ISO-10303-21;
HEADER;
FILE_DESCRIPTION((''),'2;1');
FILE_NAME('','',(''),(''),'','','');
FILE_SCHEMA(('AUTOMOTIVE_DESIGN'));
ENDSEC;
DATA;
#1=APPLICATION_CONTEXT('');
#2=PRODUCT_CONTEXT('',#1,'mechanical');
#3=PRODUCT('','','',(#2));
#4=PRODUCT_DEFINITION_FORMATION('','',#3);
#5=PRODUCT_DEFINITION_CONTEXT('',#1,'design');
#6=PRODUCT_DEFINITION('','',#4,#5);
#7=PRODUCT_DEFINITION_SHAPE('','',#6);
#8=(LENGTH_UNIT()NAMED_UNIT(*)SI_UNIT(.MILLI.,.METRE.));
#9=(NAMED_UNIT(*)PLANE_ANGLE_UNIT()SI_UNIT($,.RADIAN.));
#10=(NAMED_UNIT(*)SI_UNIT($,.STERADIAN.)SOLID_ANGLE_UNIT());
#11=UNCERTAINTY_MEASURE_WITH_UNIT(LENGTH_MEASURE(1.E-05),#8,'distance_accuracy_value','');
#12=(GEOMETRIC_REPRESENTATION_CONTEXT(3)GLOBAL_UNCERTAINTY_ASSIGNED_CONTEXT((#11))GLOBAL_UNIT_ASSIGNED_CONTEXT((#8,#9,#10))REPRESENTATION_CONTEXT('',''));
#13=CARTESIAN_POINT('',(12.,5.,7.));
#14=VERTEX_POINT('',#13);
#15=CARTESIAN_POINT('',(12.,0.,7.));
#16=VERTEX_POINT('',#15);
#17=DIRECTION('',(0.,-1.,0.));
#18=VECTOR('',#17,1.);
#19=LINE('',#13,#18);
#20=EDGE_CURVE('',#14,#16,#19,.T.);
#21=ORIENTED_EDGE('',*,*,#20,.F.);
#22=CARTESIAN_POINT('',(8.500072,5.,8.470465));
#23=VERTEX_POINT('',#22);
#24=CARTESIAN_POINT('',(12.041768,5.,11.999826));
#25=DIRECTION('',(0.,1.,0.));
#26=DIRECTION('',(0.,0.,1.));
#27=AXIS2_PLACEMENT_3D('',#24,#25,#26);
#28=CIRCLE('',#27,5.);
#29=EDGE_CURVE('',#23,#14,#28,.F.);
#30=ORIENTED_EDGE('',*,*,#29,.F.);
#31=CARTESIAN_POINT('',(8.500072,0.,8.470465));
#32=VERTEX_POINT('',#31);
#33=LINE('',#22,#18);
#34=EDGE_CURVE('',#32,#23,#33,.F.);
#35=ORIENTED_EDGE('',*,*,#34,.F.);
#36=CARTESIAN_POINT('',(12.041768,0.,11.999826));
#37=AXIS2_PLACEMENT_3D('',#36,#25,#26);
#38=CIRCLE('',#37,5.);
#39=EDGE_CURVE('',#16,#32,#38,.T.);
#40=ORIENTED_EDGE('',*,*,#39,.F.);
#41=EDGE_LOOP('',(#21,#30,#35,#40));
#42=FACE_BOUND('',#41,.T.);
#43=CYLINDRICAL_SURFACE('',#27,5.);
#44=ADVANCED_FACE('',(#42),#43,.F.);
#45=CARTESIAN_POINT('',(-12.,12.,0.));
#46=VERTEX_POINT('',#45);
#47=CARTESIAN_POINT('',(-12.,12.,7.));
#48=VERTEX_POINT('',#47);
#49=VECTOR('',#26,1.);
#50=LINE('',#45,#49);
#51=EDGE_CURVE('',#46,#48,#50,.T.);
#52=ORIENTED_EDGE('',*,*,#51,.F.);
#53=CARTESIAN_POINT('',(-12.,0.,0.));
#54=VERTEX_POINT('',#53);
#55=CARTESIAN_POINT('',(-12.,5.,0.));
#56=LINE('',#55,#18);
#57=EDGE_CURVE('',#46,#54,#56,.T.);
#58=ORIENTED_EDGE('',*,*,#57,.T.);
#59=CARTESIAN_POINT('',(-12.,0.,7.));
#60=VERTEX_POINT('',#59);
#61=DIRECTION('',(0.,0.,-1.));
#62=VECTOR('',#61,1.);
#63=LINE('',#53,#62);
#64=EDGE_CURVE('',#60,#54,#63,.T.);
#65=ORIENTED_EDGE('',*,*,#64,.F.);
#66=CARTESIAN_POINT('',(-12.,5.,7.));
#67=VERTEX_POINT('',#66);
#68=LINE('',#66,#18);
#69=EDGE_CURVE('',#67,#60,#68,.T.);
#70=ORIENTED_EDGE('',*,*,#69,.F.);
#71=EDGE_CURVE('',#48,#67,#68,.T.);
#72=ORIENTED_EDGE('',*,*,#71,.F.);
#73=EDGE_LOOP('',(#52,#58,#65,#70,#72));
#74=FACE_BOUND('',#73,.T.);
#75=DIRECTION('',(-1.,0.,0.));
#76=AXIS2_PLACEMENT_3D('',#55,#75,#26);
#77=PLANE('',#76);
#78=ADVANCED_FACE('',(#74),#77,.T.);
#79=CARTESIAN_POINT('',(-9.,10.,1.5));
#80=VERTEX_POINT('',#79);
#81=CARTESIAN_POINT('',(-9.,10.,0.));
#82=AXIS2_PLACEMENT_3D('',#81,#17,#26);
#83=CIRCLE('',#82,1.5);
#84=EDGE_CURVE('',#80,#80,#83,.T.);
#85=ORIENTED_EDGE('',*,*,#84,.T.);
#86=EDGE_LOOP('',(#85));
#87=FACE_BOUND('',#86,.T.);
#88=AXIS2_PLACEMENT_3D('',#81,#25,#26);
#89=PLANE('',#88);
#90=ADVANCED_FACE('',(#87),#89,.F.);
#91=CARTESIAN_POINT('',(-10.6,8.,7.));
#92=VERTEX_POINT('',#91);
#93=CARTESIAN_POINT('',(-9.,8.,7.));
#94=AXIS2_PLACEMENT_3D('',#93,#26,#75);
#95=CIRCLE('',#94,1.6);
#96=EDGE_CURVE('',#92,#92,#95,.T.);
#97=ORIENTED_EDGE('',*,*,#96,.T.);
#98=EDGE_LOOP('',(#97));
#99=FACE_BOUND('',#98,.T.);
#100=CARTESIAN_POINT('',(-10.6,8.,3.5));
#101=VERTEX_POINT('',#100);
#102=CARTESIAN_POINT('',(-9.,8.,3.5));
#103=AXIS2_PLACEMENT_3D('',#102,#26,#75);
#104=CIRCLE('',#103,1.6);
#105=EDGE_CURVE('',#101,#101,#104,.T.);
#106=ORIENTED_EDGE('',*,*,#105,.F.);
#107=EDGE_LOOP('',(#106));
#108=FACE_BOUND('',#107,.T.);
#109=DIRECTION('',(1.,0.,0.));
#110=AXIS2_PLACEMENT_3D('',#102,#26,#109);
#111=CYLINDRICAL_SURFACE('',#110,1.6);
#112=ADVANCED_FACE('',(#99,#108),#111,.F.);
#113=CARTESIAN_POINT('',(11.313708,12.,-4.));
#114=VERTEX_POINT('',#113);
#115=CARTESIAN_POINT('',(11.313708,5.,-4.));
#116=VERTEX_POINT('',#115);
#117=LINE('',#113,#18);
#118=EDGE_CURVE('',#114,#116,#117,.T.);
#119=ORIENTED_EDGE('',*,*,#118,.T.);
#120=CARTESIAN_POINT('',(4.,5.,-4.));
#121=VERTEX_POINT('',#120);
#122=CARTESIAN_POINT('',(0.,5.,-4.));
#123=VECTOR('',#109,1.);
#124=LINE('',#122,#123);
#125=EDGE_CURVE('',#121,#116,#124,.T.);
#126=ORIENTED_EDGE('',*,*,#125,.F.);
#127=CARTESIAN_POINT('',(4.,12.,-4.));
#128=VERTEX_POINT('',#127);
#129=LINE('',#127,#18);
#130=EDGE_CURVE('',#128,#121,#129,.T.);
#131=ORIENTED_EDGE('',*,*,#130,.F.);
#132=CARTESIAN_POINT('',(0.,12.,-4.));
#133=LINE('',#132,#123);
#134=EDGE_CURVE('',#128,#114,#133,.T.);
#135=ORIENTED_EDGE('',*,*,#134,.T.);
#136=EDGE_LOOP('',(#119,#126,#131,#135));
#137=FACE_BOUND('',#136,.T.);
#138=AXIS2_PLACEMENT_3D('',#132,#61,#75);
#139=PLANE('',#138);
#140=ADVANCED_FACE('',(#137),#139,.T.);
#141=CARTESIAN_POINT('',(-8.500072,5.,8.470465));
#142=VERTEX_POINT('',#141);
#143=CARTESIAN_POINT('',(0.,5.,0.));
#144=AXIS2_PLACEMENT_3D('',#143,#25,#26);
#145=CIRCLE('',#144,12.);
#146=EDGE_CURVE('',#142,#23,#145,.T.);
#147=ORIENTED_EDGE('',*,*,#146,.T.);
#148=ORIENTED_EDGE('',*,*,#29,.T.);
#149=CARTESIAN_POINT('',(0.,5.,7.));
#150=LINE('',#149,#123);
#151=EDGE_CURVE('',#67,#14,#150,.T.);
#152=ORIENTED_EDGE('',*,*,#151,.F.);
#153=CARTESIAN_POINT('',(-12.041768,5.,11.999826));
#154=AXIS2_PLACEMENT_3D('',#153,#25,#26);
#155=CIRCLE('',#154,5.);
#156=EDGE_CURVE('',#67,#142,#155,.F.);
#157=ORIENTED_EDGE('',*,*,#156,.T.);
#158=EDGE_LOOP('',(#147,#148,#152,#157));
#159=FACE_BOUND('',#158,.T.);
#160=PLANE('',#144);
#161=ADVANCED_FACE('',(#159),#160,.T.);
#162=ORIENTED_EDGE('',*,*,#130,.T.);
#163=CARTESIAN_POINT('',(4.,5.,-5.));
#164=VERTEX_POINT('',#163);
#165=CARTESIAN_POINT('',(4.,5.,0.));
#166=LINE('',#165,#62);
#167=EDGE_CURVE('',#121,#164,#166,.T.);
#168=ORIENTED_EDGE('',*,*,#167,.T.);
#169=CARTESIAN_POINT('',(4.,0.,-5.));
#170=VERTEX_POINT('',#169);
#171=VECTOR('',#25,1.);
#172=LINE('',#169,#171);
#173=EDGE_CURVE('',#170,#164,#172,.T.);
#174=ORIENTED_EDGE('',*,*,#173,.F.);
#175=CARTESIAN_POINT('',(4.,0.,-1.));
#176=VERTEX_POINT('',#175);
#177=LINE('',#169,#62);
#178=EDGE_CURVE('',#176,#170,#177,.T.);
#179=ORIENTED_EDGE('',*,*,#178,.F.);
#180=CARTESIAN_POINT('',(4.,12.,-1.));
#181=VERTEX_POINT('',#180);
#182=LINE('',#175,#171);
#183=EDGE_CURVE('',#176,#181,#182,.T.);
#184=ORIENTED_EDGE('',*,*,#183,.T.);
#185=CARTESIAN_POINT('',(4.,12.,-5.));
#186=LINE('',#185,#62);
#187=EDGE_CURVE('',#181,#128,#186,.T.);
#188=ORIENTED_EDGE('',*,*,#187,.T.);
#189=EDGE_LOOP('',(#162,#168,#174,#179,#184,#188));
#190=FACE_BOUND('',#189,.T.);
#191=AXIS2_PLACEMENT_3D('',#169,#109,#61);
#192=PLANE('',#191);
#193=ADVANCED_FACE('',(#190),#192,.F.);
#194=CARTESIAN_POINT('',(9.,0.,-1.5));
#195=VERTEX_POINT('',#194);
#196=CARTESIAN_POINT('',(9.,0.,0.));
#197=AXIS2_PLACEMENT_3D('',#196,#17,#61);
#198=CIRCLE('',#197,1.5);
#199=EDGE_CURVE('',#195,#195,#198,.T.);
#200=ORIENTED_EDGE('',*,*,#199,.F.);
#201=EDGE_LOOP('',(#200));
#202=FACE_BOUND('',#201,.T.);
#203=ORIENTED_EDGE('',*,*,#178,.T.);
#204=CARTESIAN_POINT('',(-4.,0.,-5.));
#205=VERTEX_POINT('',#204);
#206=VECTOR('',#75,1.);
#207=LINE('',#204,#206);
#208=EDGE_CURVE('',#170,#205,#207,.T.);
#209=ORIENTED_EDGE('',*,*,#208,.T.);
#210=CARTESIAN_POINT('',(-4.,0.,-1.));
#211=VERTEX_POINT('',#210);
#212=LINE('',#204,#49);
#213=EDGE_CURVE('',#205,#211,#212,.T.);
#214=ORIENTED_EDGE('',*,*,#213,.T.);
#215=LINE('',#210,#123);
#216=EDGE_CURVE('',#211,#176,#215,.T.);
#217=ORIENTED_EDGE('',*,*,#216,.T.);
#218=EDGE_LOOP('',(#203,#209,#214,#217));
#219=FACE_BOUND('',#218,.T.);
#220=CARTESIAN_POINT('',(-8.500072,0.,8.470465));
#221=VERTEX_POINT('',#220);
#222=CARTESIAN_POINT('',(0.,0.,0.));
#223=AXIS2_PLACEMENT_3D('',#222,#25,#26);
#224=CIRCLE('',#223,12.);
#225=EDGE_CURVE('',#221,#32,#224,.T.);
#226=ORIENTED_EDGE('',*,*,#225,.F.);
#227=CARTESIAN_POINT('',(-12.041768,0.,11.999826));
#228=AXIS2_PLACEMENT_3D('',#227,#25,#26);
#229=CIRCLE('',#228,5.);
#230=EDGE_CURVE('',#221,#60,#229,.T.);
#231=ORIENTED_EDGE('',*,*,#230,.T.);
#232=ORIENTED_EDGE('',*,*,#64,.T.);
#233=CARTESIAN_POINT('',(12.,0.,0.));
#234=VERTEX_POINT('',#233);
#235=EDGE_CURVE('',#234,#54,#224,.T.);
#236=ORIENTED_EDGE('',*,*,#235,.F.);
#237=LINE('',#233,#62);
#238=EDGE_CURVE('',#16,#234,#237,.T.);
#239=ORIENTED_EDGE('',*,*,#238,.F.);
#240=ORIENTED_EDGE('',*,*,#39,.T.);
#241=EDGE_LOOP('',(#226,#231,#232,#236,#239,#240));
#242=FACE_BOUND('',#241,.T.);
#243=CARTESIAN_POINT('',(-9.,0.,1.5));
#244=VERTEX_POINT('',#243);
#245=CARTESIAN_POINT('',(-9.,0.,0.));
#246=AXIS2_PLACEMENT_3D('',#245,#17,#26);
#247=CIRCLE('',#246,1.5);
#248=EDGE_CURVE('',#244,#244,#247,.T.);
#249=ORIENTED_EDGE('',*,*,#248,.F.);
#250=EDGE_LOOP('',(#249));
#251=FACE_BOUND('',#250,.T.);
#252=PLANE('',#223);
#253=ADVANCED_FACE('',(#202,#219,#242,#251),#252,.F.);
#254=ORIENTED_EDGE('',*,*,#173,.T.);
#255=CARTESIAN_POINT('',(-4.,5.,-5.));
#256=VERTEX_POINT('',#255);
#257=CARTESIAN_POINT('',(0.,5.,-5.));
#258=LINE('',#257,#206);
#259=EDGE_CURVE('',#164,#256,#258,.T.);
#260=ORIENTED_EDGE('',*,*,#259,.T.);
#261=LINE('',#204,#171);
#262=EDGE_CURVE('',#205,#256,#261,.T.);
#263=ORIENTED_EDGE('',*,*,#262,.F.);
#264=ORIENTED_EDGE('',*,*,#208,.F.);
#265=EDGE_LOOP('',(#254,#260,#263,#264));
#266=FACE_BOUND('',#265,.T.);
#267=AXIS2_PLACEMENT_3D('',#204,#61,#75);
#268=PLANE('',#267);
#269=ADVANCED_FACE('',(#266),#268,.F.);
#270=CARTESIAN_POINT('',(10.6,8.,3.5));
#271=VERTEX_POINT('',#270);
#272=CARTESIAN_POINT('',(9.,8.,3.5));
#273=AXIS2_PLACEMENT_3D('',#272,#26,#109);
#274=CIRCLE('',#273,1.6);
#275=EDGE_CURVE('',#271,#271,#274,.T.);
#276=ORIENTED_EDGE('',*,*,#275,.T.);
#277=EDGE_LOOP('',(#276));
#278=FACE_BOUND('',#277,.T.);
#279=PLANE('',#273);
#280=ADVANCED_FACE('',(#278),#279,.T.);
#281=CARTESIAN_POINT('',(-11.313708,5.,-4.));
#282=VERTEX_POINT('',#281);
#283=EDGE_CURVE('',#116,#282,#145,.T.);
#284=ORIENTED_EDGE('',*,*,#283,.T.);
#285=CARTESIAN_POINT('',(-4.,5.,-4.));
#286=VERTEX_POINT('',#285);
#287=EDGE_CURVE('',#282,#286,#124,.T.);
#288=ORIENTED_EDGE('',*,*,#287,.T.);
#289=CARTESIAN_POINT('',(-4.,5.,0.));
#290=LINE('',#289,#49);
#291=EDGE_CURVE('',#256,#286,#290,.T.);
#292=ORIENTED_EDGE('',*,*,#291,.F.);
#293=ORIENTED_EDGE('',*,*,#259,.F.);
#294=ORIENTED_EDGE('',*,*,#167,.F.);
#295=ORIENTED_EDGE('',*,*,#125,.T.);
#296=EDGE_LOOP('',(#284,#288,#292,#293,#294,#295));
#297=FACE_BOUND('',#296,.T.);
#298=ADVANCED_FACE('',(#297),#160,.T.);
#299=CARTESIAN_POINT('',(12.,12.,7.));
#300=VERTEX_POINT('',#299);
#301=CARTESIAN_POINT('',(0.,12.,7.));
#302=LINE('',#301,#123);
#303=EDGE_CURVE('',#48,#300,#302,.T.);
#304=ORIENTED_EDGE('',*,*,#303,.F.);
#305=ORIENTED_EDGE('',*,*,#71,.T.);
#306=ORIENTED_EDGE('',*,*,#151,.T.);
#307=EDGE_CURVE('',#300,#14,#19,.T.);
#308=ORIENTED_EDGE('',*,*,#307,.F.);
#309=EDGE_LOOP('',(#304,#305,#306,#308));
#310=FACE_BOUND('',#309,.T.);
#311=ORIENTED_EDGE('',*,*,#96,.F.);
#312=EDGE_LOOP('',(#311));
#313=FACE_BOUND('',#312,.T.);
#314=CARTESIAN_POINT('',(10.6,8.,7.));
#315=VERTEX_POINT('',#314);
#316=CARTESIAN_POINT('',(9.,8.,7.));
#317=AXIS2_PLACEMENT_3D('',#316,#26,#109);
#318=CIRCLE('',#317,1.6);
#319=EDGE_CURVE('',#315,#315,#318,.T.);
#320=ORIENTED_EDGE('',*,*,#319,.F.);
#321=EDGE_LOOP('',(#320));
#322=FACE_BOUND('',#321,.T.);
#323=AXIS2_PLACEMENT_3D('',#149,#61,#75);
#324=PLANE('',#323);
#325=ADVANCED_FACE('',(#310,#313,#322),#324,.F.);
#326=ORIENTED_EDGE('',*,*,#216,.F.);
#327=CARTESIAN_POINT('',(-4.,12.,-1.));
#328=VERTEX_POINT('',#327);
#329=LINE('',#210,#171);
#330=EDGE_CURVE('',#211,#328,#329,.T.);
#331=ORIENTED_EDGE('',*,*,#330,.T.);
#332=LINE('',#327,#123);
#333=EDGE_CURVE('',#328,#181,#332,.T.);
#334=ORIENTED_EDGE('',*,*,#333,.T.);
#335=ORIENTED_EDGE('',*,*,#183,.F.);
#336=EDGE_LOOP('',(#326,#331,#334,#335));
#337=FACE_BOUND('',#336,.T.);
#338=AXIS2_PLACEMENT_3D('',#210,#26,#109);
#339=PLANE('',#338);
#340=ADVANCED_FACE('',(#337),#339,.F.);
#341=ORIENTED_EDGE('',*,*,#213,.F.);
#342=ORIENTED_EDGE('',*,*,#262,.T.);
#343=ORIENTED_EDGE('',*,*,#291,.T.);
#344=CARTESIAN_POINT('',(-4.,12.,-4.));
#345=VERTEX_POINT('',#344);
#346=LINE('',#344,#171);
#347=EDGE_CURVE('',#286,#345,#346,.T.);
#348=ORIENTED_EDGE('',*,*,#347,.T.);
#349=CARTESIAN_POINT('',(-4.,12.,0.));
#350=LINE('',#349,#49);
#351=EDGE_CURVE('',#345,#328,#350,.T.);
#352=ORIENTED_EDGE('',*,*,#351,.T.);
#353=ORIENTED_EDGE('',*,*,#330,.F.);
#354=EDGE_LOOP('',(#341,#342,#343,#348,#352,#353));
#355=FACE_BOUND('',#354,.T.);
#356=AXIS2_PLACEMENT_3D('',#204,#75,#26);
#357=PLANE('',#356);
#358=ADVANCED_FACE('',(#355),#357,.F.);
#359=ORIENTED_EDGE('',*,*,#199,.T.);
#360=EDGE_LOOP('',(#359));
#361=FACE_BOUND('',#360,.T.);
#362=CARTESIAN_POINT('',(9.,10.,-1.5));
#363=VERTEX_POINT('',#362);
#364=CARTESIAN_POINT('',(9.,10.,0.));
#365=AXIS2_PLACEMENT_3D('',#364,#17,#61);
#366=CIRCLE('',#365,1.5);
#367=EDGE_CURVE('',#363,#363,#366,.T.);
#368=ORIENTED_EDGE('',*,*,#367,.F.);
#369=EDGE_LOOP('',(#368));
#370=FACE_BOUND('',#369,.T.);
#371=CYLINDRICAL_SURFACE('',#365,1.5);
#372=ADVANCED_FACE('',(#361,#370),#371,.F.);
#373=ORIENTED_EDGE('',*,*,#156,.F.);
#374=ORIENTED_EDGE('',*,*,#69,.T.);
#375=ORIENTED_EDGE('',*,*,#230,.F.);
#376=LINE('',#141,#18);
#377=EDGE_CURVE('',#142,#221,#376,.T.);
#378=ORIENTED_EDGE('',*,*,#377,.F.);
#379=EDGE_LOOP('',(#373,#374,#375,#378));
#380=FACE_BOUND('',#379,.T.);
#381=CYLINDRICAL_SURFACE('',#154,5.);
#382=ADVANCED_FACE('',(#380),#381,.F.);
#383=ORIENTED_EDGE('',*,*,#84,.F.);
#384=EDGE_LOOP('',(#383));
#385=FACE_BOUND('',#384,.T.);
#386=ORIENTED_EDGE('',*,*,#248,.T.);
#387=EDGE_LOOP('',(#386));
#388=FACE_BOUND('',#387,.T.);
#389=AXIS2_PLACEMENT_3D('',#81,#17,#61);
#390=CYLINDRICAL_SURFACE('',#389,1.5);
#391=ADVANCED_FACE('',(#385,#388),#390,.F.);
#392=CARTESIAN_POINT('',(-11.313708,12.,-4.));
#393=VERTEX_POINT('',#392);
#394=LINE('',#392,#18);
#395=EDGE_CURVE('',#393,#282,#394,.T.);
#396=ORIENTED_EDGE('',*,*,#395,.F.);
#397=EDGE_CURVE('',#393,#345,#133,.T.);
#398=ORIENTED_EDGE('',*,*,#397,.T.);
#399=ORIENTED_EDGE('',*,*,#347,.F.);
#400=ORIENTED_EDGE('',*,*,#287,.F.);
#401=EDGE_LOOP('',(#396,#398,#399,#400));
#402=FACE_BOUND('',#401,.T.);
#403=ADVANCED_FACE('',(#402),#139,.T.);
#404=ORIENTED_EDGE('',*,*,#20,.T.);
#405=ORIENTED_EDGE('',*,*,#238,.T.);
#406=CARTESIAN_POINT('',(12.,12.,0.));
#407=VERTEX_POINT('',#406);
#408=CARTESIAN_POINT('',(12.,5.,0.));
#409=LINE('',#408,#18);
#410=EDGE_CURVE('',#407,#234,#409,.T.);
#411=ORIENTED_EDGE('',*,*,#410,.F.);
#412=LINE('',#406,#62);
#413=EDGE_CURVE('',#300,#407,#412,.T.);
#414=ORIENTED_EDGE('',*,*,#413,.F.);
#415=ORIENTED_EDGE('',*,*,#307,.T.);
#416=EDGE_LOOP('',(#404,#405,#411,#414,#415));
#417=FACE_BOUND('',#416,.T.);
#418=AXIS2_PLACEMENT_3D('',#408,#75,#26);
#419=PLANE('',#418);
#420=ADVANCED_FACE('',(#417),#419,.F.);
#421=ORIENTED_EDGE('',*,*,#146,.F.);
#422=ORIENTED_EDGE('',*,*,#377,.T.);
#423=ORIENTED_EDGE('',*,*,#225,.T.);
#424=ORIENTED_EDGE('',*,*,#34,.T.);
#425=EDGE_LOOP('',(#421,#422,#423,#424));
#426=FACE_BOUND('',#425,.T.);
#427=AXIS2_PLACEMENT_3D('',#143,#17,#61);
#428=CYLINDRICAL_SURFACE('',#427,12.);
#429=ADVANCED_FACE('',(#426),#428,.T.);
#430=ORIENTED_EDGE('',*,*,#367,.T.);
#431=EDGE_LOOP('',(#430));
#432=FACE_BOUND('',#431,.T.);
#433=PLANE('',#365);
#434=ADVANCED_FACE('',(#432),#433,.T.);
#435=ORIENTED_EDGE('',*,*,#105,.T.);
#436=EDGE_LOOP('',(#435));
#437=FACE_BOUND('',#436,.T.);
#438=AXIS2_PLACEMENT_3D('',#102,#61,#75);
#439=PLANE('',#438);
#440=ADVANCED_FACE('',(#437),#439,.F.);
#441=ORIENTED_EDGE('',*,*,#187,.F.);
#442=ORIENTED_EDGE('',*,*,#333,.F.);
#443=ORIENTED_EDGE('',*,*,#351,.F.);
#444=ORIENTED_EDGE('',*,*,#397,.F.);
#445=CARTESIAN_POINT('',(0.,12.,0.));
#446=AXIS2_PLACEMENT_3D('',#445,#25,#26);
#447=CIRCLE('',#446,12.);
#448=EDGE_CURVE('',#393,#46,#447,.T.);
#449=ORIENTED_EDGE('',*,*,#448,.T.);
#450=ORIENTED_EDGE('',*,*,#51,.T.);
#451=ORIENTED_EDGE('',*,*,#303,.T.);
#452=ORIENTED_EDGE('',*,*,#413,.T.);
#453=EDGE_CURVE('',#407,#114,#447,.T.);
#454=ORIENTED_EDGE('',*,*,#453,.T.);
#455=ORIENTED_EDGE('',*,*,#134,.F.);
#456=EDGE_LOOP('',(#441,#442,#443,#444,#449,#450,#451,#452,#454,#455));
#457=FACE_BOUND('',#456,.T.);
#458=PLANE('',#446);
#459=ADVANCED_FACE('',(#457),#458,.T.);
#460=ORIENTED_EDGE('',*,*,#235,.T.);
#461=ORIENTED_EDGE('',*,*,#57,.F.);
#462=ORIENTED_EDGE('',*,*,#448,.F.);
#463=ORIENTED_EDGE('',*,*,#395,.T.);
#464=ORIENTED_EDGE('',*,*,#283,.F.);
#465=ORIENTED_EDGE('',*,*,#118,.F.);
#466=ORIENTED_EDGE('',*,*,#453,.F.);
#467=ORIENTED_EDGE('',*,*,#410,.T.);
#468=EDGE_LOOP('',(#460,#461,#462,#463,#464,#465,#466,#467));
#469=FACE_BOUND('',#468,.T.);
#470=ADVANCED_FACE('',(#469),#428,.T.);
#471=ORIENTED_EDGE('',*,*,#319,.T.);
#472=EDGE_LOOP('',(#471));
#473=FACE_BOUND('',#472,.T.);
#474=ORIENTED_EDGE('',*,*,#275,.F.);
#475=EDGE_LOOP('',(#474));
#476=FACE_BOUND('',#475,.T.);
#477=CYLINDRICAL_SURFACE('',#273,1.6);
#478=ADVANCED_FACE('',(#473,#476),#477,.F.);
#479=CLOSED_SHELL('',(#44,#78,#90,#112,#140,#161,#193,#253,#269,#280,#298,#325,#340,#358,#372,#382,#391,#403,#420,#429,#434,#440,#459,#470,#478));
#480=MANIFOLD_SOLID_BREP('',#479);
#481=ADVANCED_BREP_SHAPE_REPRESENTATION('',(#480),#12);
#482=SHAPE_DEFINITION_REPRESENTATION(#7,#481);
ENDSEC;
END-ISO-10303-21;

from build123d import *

# Parameters (mm, degrees)
EXTRUDE_1_DEPTH     = 5
EXTRUDE_2_DEPTH     = 7
SKETCH_3_R          = 1.5
CUT_EXTRUDE_1_DEPTH = 10
SKETCH_4_R          = 1.6
CUT_EXTRUDE_2_DEPTH = 3.5
SKETCH_5_W          = 8
SKETCH_5_H          = 4
CUT_EXTRUDE_4_DEPTH = 21.784609691
FILLET_1_R          = 5


with BuildPart() as part:
    # 草图1 → 凸台-拉伸1 (new body)
    with BuildSketch(Plane(origin=(0, 0, 0), x_dir=(1, 0, 0), z_dir=(0, 1, 0))):
        with BuildLine():
            ThreePointArc((12, 0), (0, 12), (-12, 0))
            Line((-12, 0), (12, 0))
        make_face()
        with BuildLine():
            ThreePointArc((-12, 0), (-11.422817781, -3.676851089), (-9.746794345, -7))
            Line((-9.746794345, -7), (9.746794345, -7))
            ThreePointArc((9.746794345, -7), (11.422817781, -3.676851089), (12, 0))
            Line((12, 0), (-12, 0))
        make_face()
        with BuildLine():
            Line((-12, 0), (-12, -7))
            Line((-12, -7), (-9.746794345, -7))
            ThreePointArc((-9.746794345, -7), (-11.422817781, -3.676851089), (-12, 0))
        make_face()
        with BuildLine():
            Line((9.746794345, -7), (-9.746794345, -7))
            ThreePointArc((-9.746794345, -7), (0, -12), (9.746794345, -7))
        make_face()
        with BuildLine():
            ThreePointArc((12, 0), (11.422817781, -3.676851089), (9.746794345, -7))
            Line((9.746794345, -7), (12, -7))
            Line((12, -7), (12, 0))
        make_face()
    extrude(amount=EXTRUDE_1_DEPTH)

    # 草图2 → 凸台-拉伸2 (add)
    with BuildSketch(Plane(origin=(0, 5, 0), x_dir=(1, 0, 0), z_dir=(0, 1, 0))):
        with BuildLine():
            Line((-12, 0), (-12, -7))
            Line((-12, -7), (-9.746794345, -7))
            Line((-9.746794345, -7), (9.746794345, -7))
            Line((9.746794345, -7), (12, -7))
            Line((12, -7), (12, 0))
            ThreePointArc((12, 0), (11.827182716, 2.029223745), (11.313708499, 4))
            Line((11.313708499, 4), (-11.313708499, 4))
            ThreePointArc((-11.313708499, 4), (-11.827182716, 2.029223745), (-12, 0))
        make_face()
    extrude(amount=EXTRUDE_2_DEPTH)

    # 草图3 → 切除-拉伸1 (cut)
    with BuildSketch(Plane.XZ):
        with Locations(Location((9, 0, 0), (0, 0, 270))):
            Circle(SKETCH_3_R)
        with Locations(Location((-9, 0, 0), (0, 0, 90))):
            Circle(SKETCH_3_R)
    extrude(amount=-CUT_EXTRUDE_1_DEPTH, mode=Mode.SUBTRACT)

    # 草图4 → 切除-拉伸2 (cut)
    with BuildSketch(Plane.XY.offset(7)):
        with Locations((9, 8)):
            Circle(SKETCH_4_R)
        with Locations(Location((-9, 8, 0), (0, 0, 180))):
            Circle(SKETCH_4_R)
    extrude(amount=-CUT_EXTRUDE_2_DEPTH, mode=Mode.SUBTRACT)

    # 草图5 → 切除-拉伸4 (cut, through all)
    with BuildSketch(Plane(origin=(0, 12, 0), x_dir=(1, 0, 0), z_dir=(0, 1, 0))):
        with Locations((0, 3)):
            Rectangle(SKETCH_5_W, SKETCH_5_H)
    extrude(amount=-CUT_EXTRUDE_4_DEPTH, mode=Mode.SUBTRACT)

    # 圆角1
    # the kernel refuses this fillet: 5 mm, written as the material it adds along each edge
    with BuildSketch(Plane(origin=(-9.746794345, 0, 7), x_dir=(0.6466979741325999, 0, 0.7627461768195178), z_dir=(0, 1, 0))) as fillet_1_piece_1_section:
        with BuildLine():
            CenterArc((2.329688222, -4.983839976), FILLET_1_R, 94.607768722, 45.099127844)
            Line((-1.484042662, -1.750350105), (0, 0))
            ThreePointArc((0, 0), (0.964008919, -0.038784058), (1.928017839, 0))
        make_face()
    fillet_1_piece_1 = extrude(amount=5, mode=Mode.PRIVATE)
    fillet_1_piece_1 = split(fillet_1_piece_1, bisect_by=Plane(origin=(-12, 2.5, 7.309223298), z_dir=(1, 0, 0)), keep=Keep.TOP, mode=Mode.PRIVATE)
    add(fillet_1_piece_1)
    with BuildSketch(Plane(origin=(9.746794345, 0, 7), x_dir=(-0.6466979741326015, 0, 0.7627461768195165), z_dir=(0, 1, 0))) as fillet_1_piece_2_section:
        with BuildLine():
            CenterArc((2.329688222, 4.983839976), FILLET_1_R, 220.293103434, 45.099127844)
            Line((-1.484042662, 1.750350105), (0, 0))
            ThreePointArc((0, 0), (0.964008919, 0.038784058), (1.928017839, 0))
        make_face()
    fillet_1_piece_2 = extrude(amount=5, mode=Mode.PRIVATE)
    fillet_1_piece_2 = split(fillet_1_piece_2, bisect_by=Plane(origin=(12, 2.5, 7.309223298), z_dir=(-1, 0, 0)), keep=Keep.TOP, mode=Mode.PRIVATE)
    add(fillet_1_piece_2)


solid = part.part
